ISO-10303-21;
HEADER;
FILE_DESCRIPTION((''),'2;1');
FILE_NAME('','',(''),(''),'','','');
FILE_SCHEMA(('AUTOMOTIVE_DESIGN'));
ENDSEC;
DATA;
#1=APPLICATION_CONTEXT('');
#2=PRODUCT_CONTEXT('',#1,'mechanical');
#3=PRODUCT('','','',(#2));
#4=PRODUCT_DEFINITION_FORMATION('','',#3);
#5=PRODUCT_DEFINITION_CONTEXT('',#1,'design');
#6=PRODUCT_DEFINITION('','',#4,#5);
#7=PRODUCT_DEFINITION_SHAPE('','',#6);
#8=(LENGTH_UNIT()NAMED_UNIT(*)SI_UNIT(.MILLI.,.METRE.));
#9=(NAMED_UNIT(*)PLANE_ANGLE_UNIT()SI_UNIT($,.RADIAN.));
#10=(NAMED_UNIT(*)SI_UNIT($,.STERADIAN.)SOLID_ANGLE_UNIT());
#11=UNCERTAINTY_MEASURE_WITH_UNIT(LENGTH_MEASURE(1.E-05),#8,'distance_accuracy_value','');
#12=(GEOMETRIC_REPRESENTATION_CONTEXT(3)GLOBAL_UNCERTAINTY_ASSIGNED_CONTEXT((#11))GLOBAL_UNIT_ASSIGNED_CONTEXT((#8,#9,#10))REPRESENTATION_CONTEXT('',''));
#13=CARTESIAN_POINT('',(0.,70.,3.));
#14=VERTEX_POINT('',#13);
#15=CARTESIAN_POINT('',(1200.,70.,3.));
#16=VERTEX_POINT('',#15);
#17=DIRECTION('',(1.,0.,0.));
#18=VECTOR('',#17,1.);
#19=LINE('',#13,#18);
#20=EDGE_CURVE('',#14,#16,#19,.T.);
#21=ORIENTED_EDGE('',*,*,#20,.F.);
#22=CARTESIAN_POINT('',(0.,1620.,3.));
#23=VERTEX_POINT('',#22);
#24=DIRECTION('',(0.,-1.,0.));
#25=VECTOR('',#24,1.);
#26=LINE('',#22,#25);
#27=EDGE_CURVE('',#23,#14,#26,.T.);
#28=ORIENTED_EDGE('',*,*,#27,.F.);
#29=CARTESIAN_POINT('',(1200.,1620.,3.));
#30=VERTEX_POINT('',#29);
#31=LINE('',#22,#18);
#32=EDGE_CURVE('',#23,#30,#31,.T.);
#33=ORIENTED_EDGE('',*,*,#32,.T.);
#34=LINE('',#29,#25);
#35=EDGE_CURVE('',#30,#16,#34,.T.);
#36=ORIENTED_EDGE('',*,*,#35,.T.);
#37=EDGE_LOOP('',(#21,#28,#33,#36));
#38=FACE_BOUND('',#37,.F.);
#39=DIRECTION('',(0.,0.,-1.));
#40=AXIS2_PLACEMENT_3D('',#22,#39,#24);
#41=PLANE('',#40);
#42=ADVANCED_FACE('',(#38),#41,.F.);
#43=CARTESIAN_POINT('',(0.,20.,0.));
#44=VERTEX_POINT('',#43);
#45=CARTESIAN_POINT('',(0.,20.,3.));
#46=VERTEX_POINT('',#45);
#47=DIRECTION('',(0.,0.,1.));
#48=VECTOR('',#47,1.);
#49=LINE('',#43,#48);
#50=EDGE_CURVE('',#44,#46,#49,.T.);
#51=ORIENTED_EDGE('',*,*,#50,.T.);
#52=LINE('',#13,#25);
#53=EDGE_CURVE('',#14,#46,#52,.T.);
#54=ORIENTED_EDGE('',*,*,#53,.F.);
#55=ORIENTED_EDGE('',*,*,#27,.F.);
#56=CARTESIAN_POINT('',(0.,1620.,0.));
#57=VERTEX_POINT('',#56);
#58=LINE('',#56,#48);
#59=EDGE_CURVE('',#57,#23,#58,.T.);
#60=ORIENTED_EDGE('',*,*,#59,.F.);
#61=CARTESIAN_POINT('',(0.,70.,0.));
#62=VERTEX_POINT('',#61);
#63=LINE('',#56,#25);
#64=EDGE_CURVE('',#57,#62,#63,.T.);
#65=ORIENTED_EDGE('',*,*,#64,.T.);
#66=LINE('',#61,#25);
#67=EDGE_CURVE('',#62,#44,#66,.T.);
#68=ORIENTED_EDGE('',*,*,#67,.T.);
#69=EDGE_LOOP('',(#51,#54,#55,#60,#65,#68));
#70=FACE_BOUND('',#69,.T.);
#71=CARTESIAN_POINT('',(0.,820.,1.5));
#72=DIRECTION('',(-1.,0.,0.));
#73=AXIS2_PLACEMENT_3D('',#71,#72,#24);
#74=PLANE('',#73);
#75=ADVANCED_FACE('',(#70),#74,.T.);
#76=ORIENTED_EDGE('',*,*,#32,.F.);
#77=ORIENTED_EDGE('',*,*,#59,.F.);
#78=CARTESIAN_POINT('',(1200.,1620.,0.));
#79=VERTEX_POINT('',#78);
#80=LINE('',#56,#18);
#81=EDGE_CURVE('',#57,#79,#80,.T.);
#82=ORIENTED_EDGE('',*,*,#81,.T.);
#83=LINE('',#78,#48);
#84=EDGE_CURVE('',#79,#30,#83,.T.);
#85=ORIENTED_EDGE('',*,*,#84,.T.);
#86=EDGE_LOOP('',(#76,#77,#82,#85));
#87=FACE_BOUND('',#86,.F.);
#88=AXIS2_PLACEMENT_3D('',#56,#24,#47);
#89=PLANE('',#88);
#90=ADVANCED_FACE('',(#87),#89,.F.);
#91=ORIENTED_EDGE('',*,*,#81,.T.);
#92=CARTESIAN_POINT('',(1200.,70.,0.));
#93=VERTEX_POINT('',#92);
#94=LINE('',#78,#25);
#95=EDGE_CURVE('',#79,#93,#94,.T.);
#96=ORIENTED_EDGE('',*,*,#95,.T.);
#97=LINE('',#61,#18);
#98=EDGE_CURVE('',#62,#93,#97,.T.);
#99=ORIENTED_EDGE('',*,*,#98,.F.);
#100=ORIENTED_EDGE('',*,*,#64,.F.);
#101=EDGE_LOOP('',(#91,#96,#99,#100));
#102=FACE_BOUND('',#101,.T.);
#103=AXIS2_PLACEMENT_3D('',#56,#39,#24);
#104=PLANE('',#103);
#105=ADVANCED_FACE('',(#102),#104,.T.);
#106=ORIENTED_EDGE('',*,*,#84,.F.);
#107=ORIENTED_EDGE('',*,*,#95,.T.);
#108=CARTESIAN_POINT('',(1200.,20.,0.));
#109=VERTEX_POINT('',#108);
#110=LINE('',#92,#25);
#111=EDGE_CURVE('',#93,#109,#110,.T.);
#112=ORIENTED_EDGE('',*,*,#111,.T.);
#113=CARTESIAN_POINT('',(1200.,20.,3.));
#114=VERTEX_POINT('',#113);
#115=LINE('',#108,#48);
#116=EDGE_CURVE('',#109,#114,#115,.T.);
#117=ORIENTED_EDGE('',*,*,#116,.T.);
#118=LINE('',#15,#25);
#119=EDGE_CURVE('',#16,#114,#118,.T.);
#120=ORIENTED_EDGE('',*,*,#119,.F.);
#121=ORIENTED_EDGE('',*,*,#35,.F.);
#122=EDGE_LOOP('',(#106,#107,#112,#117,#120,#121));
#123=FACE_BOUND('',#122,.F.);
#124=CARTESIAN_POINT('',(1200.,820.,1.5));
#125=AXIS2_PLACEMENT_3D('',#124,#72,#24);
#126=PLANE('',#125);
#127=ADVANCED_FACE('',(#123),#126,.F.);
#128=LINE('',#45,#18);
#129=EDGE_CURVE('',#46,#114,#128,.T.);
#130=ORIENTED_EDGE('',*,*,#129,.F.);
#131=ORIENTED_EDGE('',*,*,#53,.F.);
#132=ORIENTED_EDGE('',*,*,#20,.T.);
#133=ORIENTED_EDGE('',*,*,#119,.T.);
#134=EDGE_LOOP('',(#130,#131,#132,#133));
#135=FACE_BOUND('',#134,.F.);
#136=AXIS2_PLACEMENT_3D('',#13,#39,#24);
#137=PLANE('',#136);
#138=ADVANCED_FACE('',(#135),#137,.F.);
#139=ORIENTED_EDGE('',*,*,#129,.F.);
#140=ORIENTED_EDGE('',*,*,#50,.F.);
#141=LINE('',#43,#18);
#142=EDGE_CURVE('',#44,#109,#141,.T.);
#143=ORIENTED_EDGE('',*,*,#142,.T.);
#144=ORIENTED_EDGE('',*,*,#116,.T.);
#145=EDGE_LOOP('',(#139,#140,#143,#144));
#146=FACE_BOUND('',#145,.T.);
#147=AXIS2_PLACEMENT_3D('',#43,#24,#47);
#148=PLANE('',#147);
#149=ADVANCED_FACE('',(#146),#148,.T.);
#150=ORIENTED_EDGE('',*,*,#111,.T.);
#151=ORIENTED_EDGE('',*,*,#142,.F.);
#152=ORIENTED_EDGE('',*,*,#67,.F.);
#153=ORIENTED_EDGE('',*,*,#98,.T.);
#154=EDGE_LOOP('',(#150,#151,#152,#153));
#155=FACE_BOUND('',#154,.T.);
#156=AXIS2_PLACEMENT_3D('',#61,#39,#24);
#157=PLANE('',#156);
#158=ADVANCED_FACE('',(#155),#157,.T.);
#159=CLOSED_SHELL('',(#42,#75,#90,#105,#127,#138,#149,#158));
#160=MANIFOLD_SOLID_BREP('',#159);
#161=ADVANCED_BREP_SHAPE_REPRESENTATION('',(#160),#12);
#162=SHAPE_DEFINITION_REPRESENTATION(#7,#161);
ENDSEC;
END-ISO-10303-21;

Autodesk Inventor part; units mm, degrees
ref_plane "YZ Plane" through (0, 0, 0) normal (1, 0, 0) x (0, 1, 0)
ref_plane "XZ Plane" through (0, 0, 0) normal (0, 1, 0) x (-1, 0, 0)
ref_plane "XY Plane" through (0, 0, 0) normal (0, 0, 1) x (1, 0, 0)
sketch "Sketch1" plane through (0, 0, 0) normal (1, 0, 0) x (0, 1, 0)
  line L0 (1620, 0) -> (70, 0)
  line L1 (70, 0) -> (20, 0)
  line L2 (20, 0) -> (0, 0)
  dimension "d0" = 180
  dimension "d1" = 50
  dimension "d2" = 1620
  dimension "d3" = 20
contour flange "Contour Flange1" sketch "Sketch1" thickness 3 bend radius 3 width 1200 along (1, 0, 0) mid plane no both sides no wall seen from (0, 845, 0) lies toward (0, 0, 1) curves L0 L1
bend "Bend1"
corner "Corner1"
sketch "Sketch2" plane through (1197.8787, 20, 0.8787) normal (0.7071068, 0, 0.7071068) x (0, 1, 0)
  line L0 (1600, 0) -> (0, 0)
  line L1 (0, 0) -> (0, -50)
  line L2 (0, -50) -> (1600, -50)
  line L3 (1600, -50) -> (1600, 0)
equation "\"d4\" = Thickness"
equation "\"d5\" = BendReliefWidth"
equation "\"d6\" = BendReliefDepth"
equation "\"d7\" = MinimumRemnant"
equation "\"d8\" = TransitionRadius"
equation "\"d10\" = BendRadius"
equation "\"d12\" = CornerReliefSize"
equation "\"d13\" = GapSize"
equation "\"d14\" = JacobiRadiusSize"
equation "\"BendRadius\" = Thickness"
equation "\"BendReliefWidth\" = Thickness"
equation "\"BendReliefDepth\" = 0.5 * Thickness"
equation "\"CornerReliefSize\" = 4 * Thickness"
equation "\"MinimumRemnant\" = 2 * Thickness"
equation "\"TransitionRadius\" = BendRadius"
equation "\"JacobiRadiusSize\" = BendRadius"
equation "\"GapSize\" = Thickness"
equation "\"Thickness\" = 3"
properties part number "GBK-RK-0011 long wall 1"
